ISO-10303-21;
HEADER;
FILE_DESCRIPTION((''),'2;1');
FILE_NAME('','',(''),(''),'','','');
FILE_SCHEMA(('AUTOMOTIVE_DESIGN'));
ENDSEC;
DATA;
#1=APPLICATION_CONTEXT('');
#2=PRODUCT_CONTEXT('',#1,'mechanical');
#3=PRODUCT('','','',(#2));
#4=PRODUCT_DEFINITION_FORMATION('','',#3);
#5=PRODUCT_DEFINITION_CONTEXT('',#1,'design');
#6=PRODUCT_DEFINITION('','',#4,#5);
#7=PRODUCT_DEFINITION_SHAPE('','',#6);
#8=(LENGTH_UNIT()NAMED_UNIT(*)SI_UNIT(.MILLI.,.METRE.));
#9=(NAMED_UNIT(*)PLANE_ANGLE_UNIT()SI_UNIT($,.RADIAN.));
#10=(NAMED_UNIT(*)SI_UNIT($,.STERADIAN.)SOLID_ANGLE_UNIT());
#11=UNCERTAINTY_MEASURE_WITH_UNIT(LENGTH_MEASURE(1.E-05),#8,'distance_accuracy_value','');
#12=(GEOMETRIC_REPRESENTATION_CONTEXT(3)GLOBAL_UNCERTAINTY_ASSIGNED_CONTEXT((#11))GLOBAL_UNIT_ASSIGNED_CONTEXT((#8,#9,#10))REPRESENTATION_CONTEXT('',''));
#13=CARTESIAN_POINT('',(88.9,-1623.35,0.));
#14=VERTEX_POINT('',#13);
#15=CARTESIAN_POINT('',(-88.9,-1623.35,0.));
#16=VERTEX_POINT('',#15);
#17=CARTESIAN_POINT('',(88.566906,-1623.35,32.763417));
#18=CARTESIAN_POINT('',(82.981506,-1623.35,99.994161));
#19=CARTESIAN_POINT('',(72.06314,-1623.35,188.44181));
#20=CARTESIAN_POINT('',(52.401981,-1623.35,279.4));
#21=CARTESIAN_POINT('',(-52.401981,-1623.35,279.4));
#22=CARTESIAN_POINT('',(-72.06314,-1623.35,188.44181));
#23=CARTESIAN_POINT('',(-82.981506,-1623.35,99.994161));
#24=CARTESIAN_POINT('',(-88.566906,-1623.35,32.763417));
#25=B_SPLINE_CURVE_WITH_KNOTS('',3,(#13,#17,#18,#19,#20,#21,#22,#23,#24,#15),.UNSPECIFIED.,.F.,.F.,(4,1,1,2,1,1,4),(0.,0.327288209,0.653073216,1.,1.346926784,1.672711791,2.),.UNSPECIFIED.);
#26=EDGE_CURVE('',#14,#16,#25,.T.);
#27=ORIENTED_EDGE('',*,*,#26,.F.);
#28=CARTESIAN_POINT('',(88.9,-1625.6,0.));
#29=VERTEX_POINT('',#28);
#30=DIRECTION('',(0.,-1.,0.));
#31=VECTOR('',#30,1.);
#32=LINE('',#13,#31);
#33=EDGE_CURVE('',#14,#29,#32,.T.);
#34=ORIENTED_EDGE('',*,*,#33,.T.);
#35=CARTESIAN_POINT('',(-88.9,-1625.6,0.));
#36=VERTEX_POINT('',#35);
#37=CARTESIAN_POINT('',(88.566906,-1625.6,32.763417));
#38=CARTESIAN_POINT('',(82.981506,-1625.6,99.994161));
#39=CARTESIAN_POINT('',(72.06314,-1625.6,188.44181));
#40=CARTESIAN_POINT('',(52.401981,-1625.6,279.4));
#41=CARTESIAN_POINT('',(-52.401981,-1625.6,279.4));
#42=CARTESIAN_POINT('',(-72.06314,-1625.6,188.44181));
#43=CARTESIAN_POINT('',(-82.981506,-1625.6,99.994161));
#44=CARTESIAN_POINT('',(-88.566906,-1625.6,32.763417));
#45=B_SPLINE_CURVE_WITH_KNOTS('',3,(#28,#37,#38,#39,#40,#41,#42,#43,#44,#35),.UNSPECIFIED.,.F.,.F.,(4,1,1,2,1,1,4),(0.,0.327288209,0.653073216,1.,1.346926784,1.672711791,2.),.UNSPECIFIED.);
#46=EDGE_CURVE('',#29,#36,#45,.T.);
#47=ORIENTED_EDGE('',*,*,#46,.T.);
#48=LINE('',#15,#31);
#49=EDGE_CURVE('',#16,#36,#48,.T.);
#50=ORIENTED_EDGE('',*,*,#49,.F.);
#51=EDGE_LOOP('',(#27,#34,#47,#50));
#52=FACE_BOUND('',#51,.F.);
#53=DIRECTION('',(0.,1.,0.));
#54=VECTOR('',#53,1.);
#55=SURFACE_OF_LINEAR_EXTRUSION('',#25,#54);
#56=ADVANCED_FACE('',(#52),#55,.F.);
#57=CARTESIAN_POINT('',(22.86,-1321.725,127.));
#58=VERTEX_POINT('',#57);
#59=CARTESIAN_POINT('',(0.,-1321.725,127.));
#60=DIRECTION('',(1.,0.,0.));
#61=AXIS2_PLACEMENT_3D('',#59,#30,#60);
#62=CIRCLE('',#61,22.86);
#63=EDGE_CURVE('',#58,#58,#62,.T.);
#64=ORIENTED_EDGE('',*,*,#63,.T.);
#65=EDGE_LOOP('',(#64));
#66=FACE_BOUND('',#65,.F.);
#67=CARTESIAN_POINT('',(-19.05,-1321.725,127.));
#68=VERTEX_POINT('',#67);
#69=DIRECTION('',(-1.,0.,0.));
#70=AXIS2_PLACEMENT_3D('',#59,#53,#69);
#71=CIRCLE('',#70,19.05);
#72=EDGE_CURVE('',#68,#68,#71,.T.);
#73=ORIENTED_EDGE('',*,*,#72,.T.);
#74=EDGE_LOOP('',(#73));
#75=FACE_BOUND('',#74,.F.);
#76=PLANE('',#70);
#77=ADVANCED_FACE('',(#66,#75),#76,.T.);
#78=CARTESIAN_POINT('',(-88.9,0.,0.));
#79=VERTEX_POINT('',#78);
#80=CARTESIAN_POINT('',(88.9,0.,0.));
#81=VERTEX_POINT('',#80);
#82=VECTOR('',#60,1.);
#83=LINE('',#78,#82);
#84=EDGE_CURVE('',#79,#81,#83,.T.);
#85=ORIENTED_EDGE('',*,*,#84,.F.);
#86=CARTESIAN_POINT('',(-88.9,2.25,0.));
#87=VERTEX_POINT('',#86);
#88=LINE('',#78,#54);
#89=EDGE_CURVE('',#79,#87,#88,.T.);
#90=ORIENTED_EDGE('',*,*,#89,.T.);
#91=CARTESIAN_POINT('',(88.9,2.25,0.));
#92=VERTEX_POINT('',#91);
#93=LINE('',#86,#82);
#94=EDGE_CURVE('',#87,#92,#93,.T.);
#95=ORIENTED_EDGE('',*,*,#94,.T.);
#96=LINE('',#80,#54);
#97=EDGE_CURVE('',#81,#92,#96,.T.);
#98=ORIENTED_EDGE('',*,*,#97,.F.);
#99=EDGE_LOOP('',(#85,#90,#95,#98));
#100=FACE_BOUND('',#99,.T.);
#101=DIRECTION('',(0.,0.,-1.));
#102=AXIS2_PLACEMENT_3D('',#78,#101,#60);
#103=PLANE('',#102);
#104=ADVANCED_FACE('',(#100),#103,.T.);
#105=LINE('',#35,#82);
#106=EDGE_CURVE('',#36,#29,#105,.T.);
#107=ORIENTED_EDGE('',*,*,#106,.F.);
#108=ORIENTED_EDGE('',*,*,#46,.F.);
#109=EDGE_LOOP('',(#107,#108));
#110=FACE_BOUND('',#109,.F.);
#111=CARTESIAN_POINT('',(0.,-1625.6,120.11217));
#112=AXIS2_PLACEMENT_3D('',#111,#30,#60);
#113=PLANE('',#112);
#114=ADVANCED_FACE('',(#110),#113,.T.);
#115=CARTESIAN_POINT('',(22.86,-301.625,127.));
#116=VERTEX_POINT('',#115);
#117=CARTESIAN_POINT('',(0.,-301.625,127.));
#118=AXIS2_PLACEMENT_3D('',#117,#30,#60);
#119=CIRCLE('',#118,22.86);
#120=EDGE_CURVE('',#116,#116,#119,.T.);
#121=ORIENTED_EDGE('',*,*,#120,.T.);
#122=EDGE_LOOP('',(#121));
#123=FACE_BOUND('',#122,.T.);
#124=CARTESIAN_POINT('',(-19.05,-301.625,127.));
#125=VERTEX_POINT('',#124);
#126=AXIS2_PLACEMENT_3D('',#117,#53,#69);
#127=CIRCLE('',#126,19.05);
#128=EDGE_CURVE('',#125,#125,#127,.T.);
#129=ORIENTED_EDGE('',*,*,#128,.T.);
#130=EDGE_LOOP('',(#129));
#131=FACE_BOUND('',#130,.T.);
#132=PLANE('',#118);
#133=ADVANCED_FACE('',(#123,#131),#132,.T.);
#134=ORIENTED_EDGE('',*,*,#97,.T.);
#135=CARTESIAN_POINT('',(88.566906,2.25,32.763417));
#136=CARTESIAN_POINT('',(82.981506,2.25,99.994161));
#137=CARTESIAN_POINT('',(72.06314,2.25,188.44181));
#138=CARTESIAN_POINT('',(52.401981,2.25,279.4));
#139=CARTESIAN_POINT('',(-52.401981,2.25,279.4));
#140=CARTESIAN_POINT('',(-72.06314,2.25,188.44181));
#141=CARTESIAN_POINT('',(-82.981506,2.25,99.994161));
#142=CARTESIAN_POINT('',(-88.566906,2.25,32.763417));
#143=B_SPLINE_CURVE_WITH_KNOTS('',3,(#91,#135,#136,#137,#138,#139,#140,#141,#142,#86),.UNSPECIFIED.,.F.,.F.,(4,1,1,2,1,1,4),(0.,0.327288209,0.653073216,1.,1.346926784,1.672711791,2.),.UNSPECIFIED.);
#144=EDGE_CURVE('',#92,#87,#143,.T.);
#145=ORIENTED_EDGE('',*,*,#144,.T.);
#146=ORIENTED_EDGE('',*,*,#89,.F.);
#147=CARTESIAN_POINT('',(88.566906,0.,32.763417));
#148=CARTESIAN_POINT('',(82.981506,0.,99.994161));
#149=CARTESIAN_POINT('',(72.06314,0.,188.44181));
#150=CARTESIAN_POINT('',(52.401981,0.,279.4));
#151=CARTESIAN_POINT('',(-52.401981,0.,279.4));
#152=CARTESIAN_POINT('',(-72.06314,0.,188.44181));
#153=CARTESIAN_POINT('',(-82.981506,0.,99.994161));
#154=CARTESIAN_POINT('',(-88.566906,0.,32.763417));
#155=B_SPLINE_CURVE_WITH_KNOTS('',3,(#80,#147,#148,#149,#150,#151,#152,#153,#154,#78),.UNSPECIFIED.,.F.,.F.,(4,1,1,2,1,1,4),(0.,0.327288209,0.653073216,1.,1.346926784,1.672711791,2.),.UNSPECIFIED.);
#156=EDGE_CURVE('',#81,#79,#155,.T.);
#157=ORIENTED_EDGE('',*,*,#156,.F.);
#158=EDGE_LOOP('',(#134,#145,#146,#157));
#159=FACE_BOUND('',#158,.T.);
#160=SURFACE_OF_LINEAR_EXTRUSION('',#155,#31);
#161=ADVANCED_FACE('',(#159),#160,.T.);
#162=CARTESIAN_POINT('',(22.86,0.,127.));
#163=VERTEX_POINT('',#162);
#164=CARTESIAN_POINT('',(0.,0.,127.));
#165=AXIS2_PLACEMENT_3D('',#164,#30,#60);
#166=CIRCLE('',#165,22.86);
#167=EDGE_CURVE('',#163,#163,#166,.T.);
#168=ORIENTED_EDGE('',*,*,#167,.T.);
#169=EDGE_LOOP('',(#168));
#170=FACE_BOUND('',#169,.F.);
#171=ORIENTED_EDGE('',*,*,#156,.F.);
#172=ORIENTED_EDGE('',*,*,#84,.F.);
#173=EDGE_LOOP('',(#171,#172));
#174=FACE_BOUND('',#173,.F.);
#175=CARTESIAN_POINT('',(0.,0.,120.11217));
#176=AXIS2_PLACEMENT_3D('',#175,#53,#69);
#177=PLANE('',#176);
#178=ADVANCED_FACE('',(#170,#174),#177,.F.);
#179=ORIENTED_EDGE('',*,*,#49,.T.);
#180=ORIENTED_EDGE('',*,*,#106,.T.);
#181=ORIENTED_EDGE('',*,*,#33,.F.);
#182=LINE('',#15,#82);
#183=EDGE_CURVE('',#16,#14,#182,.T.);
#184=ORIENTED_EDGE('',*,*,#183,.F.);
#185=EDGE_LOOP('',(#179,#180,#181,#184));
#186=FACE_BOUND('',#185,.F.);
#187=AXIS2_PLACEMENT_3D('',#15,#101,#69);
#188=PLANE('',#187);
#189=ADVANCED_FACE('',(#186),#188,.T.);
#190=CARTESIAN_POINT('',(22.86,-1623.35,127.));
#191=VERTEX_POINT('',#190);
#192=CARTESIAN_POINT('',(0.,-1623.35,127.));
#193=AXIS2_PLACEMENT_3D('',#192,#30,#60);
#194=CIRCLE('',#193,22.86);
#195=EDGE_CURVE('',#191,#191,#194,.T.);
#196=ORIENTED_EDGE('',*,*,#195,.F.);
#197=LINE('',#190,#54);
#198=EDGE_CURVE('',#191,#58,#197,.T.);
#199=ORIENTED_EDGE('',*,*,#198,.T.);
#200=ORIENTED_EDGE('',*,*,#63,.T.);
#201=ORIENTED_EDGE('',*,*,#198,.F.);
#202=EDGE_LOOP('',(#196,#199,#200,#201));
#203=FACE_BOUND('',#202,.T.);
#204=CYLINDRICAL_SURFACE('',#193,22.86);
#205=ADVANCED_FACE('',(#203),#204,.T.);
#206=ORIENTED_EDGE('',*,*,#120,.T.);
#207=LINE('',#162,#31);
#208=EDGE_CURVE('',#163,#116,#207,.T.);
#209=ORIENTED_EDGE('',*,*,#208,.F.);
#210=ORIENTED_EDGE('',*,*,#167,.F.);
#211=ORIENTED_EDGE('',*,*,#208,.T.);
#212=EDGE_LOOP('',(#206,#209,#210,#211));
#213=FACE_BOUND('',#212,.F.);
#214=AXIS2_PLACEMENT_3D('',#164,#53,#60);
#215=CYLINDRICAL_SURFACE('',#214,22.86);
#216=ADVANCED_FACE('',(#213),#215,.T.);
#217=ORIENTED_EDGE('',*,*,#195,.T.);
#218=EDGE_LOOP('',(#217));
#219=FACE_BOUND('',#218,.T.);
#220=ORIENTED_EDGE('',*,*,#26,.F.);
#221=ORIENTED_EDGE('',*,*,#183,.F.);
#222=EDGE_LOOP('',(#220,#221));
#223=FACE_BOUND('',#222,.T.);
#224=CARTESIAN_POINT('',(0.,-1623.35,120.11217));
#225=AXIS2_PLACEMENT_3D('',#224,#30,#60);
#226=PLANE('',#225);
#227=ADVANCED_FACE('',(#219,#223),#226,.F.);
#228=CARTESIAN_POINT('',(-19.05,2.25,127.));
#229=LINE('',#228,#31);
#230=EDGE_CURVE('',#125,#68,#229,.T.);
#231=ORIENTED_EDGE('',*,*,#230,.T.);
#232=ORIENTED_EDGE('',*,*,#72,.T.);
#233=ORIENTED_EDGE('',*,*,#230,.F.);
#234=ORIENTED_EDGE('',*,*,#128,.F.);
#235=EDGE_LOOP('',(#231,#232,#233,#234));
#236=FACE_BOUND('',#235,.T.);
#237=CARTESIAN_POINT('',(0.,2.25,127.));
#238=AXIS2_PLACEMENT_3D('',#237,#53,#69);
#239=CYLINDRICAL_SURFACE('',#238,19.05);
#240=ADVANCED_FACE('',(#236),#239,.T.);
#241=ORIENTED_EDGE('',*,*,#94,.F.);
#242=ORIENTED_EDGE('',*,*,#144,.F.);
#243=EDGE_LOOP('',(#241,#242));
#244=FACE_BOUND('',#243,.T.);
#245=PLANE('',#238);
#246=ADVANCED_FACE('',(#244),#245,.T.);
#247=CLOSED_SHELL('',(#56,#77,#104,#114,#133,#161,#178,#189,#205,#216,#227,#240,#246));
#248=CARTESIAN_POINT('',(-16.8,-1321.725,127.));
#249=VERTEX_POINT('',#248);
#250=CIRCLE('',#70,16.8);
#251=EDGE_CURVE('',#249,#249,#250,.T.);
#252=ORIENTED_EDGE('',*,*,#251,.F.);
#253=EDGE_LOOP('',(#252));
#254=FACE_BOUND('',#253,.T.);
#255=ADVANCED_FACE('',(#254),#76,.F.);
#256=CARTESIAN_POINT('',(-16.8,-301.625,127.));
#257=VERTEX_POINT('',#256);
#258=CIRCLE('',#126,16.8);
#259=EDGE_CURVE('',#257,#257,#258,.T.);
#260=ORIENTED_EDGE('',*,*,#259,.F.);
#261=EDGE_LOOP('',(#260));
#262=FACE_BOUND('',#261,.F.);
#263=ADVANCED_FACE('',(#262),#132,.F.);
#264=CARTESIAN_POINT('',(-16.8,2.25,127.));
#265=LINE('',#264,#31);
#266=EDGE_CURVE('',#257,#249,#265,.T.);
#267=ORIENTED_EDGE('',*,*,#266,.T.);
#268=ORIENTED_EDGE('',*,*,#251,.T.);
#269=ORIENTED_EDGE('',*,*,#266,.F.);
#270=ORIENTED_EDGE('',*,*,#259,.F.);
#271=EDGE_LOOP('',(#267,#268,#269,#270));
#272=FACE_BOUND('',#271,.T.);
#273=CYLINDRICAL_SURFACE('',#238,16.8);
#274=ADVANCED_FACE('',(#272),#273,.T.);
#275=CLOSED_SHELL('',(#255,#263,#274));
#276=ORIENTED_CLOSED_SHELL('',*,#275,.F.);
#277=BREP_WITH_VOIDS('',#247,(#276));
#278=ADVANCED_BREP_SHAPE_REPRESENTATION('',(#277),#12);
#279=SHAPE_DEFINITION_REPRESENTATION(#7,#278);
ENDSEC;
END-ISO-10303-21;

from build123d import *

# Parameters (mm, degrees)
F1_DEPTH = 2.25
F2_R     = 19.05
F2_R_2   = 16.8
F3_DEPTH = 1625.6
F5_R     = 22.86
F6_DEPTH = 301.625


# Not quite as in the source:
# - a pattern or mirror of a feature is missing from the dataset's text; its kind, count and spacing are read off the source's solid


with BuildPart() as f1:
    # F0 (on Front) → F1 (new body)
    with BuildSketch(Plane.XZ):
        with BuildLine():
            add(Edge.make_bspline(
                [(-88.9, 0), (-88.5669056837, 32.7634173245), (-82.9815055394, 99.9941611656), (-72.06314011, 188.4418096487), (-52.4019812522, 279.4), (0, 279.4)],
                knots=[0, 0, 0, 0, 0.3272882092, 0.6530732161, 1, 1, 1, 1], degree=3))
            Line((-88.9, 0), (88.9, 0))
            add(Edge.make_bspline(
                [(88.9, 0), (88.5669056837, 32.7634173245), (82.9815055394, 99.9941611656), (72.06314011, 188.4418096487), (52.4019812522, 279.4), (0, 279.4)],
                knots=[0, 0, 0, 0, 0.3272882092, 0.6530732161, 1, 1, 1, 1], degree=3))
        make_face()
    extrude(amount=-F1_DEPTH)


with BuildPart() as f1_copies_1:
    # F1_copies: instance of F1
    add(f1.part.mirror(Plane(origin=(0, -811.675, 0), x_dir=(0, 0, -1), z_dir=(0, -1, 0))))


with BuildPart() as f1_1:
    add(f1.part)

    add(f1_copies_1.part)  # F3 merges F1_copies_1
    # F2 (on face) → F3 (join)
    with BuildSketch(Plane(origin=(0, 2.25, 0), x_dir=(-1, 0, 0), z_dir=(0, 1, 0))):
        with Locations((0, 127)):
            Circle(F2_R)
        with Locations((0, 127)):
            Circle(F2_R_2, mode=Mode.SUBTRACT)
    extrude(amount=-F3_DEPTH)

    # F5 (on face) → F6 (join)
    with BuildSketch(Plane.XZ):
        with Locations((0, 127)):
            Circle(F5_R)
    f6 = extrude(amount=F6_DEPTH)

    # F6_copies: F6 across plane
    add(f6.mirror(Plane(origin=(0, -811.675, 0), x_dir=(0, 0, -1), z_dir=(0, -1, 0))))


solid = f1_1.part
